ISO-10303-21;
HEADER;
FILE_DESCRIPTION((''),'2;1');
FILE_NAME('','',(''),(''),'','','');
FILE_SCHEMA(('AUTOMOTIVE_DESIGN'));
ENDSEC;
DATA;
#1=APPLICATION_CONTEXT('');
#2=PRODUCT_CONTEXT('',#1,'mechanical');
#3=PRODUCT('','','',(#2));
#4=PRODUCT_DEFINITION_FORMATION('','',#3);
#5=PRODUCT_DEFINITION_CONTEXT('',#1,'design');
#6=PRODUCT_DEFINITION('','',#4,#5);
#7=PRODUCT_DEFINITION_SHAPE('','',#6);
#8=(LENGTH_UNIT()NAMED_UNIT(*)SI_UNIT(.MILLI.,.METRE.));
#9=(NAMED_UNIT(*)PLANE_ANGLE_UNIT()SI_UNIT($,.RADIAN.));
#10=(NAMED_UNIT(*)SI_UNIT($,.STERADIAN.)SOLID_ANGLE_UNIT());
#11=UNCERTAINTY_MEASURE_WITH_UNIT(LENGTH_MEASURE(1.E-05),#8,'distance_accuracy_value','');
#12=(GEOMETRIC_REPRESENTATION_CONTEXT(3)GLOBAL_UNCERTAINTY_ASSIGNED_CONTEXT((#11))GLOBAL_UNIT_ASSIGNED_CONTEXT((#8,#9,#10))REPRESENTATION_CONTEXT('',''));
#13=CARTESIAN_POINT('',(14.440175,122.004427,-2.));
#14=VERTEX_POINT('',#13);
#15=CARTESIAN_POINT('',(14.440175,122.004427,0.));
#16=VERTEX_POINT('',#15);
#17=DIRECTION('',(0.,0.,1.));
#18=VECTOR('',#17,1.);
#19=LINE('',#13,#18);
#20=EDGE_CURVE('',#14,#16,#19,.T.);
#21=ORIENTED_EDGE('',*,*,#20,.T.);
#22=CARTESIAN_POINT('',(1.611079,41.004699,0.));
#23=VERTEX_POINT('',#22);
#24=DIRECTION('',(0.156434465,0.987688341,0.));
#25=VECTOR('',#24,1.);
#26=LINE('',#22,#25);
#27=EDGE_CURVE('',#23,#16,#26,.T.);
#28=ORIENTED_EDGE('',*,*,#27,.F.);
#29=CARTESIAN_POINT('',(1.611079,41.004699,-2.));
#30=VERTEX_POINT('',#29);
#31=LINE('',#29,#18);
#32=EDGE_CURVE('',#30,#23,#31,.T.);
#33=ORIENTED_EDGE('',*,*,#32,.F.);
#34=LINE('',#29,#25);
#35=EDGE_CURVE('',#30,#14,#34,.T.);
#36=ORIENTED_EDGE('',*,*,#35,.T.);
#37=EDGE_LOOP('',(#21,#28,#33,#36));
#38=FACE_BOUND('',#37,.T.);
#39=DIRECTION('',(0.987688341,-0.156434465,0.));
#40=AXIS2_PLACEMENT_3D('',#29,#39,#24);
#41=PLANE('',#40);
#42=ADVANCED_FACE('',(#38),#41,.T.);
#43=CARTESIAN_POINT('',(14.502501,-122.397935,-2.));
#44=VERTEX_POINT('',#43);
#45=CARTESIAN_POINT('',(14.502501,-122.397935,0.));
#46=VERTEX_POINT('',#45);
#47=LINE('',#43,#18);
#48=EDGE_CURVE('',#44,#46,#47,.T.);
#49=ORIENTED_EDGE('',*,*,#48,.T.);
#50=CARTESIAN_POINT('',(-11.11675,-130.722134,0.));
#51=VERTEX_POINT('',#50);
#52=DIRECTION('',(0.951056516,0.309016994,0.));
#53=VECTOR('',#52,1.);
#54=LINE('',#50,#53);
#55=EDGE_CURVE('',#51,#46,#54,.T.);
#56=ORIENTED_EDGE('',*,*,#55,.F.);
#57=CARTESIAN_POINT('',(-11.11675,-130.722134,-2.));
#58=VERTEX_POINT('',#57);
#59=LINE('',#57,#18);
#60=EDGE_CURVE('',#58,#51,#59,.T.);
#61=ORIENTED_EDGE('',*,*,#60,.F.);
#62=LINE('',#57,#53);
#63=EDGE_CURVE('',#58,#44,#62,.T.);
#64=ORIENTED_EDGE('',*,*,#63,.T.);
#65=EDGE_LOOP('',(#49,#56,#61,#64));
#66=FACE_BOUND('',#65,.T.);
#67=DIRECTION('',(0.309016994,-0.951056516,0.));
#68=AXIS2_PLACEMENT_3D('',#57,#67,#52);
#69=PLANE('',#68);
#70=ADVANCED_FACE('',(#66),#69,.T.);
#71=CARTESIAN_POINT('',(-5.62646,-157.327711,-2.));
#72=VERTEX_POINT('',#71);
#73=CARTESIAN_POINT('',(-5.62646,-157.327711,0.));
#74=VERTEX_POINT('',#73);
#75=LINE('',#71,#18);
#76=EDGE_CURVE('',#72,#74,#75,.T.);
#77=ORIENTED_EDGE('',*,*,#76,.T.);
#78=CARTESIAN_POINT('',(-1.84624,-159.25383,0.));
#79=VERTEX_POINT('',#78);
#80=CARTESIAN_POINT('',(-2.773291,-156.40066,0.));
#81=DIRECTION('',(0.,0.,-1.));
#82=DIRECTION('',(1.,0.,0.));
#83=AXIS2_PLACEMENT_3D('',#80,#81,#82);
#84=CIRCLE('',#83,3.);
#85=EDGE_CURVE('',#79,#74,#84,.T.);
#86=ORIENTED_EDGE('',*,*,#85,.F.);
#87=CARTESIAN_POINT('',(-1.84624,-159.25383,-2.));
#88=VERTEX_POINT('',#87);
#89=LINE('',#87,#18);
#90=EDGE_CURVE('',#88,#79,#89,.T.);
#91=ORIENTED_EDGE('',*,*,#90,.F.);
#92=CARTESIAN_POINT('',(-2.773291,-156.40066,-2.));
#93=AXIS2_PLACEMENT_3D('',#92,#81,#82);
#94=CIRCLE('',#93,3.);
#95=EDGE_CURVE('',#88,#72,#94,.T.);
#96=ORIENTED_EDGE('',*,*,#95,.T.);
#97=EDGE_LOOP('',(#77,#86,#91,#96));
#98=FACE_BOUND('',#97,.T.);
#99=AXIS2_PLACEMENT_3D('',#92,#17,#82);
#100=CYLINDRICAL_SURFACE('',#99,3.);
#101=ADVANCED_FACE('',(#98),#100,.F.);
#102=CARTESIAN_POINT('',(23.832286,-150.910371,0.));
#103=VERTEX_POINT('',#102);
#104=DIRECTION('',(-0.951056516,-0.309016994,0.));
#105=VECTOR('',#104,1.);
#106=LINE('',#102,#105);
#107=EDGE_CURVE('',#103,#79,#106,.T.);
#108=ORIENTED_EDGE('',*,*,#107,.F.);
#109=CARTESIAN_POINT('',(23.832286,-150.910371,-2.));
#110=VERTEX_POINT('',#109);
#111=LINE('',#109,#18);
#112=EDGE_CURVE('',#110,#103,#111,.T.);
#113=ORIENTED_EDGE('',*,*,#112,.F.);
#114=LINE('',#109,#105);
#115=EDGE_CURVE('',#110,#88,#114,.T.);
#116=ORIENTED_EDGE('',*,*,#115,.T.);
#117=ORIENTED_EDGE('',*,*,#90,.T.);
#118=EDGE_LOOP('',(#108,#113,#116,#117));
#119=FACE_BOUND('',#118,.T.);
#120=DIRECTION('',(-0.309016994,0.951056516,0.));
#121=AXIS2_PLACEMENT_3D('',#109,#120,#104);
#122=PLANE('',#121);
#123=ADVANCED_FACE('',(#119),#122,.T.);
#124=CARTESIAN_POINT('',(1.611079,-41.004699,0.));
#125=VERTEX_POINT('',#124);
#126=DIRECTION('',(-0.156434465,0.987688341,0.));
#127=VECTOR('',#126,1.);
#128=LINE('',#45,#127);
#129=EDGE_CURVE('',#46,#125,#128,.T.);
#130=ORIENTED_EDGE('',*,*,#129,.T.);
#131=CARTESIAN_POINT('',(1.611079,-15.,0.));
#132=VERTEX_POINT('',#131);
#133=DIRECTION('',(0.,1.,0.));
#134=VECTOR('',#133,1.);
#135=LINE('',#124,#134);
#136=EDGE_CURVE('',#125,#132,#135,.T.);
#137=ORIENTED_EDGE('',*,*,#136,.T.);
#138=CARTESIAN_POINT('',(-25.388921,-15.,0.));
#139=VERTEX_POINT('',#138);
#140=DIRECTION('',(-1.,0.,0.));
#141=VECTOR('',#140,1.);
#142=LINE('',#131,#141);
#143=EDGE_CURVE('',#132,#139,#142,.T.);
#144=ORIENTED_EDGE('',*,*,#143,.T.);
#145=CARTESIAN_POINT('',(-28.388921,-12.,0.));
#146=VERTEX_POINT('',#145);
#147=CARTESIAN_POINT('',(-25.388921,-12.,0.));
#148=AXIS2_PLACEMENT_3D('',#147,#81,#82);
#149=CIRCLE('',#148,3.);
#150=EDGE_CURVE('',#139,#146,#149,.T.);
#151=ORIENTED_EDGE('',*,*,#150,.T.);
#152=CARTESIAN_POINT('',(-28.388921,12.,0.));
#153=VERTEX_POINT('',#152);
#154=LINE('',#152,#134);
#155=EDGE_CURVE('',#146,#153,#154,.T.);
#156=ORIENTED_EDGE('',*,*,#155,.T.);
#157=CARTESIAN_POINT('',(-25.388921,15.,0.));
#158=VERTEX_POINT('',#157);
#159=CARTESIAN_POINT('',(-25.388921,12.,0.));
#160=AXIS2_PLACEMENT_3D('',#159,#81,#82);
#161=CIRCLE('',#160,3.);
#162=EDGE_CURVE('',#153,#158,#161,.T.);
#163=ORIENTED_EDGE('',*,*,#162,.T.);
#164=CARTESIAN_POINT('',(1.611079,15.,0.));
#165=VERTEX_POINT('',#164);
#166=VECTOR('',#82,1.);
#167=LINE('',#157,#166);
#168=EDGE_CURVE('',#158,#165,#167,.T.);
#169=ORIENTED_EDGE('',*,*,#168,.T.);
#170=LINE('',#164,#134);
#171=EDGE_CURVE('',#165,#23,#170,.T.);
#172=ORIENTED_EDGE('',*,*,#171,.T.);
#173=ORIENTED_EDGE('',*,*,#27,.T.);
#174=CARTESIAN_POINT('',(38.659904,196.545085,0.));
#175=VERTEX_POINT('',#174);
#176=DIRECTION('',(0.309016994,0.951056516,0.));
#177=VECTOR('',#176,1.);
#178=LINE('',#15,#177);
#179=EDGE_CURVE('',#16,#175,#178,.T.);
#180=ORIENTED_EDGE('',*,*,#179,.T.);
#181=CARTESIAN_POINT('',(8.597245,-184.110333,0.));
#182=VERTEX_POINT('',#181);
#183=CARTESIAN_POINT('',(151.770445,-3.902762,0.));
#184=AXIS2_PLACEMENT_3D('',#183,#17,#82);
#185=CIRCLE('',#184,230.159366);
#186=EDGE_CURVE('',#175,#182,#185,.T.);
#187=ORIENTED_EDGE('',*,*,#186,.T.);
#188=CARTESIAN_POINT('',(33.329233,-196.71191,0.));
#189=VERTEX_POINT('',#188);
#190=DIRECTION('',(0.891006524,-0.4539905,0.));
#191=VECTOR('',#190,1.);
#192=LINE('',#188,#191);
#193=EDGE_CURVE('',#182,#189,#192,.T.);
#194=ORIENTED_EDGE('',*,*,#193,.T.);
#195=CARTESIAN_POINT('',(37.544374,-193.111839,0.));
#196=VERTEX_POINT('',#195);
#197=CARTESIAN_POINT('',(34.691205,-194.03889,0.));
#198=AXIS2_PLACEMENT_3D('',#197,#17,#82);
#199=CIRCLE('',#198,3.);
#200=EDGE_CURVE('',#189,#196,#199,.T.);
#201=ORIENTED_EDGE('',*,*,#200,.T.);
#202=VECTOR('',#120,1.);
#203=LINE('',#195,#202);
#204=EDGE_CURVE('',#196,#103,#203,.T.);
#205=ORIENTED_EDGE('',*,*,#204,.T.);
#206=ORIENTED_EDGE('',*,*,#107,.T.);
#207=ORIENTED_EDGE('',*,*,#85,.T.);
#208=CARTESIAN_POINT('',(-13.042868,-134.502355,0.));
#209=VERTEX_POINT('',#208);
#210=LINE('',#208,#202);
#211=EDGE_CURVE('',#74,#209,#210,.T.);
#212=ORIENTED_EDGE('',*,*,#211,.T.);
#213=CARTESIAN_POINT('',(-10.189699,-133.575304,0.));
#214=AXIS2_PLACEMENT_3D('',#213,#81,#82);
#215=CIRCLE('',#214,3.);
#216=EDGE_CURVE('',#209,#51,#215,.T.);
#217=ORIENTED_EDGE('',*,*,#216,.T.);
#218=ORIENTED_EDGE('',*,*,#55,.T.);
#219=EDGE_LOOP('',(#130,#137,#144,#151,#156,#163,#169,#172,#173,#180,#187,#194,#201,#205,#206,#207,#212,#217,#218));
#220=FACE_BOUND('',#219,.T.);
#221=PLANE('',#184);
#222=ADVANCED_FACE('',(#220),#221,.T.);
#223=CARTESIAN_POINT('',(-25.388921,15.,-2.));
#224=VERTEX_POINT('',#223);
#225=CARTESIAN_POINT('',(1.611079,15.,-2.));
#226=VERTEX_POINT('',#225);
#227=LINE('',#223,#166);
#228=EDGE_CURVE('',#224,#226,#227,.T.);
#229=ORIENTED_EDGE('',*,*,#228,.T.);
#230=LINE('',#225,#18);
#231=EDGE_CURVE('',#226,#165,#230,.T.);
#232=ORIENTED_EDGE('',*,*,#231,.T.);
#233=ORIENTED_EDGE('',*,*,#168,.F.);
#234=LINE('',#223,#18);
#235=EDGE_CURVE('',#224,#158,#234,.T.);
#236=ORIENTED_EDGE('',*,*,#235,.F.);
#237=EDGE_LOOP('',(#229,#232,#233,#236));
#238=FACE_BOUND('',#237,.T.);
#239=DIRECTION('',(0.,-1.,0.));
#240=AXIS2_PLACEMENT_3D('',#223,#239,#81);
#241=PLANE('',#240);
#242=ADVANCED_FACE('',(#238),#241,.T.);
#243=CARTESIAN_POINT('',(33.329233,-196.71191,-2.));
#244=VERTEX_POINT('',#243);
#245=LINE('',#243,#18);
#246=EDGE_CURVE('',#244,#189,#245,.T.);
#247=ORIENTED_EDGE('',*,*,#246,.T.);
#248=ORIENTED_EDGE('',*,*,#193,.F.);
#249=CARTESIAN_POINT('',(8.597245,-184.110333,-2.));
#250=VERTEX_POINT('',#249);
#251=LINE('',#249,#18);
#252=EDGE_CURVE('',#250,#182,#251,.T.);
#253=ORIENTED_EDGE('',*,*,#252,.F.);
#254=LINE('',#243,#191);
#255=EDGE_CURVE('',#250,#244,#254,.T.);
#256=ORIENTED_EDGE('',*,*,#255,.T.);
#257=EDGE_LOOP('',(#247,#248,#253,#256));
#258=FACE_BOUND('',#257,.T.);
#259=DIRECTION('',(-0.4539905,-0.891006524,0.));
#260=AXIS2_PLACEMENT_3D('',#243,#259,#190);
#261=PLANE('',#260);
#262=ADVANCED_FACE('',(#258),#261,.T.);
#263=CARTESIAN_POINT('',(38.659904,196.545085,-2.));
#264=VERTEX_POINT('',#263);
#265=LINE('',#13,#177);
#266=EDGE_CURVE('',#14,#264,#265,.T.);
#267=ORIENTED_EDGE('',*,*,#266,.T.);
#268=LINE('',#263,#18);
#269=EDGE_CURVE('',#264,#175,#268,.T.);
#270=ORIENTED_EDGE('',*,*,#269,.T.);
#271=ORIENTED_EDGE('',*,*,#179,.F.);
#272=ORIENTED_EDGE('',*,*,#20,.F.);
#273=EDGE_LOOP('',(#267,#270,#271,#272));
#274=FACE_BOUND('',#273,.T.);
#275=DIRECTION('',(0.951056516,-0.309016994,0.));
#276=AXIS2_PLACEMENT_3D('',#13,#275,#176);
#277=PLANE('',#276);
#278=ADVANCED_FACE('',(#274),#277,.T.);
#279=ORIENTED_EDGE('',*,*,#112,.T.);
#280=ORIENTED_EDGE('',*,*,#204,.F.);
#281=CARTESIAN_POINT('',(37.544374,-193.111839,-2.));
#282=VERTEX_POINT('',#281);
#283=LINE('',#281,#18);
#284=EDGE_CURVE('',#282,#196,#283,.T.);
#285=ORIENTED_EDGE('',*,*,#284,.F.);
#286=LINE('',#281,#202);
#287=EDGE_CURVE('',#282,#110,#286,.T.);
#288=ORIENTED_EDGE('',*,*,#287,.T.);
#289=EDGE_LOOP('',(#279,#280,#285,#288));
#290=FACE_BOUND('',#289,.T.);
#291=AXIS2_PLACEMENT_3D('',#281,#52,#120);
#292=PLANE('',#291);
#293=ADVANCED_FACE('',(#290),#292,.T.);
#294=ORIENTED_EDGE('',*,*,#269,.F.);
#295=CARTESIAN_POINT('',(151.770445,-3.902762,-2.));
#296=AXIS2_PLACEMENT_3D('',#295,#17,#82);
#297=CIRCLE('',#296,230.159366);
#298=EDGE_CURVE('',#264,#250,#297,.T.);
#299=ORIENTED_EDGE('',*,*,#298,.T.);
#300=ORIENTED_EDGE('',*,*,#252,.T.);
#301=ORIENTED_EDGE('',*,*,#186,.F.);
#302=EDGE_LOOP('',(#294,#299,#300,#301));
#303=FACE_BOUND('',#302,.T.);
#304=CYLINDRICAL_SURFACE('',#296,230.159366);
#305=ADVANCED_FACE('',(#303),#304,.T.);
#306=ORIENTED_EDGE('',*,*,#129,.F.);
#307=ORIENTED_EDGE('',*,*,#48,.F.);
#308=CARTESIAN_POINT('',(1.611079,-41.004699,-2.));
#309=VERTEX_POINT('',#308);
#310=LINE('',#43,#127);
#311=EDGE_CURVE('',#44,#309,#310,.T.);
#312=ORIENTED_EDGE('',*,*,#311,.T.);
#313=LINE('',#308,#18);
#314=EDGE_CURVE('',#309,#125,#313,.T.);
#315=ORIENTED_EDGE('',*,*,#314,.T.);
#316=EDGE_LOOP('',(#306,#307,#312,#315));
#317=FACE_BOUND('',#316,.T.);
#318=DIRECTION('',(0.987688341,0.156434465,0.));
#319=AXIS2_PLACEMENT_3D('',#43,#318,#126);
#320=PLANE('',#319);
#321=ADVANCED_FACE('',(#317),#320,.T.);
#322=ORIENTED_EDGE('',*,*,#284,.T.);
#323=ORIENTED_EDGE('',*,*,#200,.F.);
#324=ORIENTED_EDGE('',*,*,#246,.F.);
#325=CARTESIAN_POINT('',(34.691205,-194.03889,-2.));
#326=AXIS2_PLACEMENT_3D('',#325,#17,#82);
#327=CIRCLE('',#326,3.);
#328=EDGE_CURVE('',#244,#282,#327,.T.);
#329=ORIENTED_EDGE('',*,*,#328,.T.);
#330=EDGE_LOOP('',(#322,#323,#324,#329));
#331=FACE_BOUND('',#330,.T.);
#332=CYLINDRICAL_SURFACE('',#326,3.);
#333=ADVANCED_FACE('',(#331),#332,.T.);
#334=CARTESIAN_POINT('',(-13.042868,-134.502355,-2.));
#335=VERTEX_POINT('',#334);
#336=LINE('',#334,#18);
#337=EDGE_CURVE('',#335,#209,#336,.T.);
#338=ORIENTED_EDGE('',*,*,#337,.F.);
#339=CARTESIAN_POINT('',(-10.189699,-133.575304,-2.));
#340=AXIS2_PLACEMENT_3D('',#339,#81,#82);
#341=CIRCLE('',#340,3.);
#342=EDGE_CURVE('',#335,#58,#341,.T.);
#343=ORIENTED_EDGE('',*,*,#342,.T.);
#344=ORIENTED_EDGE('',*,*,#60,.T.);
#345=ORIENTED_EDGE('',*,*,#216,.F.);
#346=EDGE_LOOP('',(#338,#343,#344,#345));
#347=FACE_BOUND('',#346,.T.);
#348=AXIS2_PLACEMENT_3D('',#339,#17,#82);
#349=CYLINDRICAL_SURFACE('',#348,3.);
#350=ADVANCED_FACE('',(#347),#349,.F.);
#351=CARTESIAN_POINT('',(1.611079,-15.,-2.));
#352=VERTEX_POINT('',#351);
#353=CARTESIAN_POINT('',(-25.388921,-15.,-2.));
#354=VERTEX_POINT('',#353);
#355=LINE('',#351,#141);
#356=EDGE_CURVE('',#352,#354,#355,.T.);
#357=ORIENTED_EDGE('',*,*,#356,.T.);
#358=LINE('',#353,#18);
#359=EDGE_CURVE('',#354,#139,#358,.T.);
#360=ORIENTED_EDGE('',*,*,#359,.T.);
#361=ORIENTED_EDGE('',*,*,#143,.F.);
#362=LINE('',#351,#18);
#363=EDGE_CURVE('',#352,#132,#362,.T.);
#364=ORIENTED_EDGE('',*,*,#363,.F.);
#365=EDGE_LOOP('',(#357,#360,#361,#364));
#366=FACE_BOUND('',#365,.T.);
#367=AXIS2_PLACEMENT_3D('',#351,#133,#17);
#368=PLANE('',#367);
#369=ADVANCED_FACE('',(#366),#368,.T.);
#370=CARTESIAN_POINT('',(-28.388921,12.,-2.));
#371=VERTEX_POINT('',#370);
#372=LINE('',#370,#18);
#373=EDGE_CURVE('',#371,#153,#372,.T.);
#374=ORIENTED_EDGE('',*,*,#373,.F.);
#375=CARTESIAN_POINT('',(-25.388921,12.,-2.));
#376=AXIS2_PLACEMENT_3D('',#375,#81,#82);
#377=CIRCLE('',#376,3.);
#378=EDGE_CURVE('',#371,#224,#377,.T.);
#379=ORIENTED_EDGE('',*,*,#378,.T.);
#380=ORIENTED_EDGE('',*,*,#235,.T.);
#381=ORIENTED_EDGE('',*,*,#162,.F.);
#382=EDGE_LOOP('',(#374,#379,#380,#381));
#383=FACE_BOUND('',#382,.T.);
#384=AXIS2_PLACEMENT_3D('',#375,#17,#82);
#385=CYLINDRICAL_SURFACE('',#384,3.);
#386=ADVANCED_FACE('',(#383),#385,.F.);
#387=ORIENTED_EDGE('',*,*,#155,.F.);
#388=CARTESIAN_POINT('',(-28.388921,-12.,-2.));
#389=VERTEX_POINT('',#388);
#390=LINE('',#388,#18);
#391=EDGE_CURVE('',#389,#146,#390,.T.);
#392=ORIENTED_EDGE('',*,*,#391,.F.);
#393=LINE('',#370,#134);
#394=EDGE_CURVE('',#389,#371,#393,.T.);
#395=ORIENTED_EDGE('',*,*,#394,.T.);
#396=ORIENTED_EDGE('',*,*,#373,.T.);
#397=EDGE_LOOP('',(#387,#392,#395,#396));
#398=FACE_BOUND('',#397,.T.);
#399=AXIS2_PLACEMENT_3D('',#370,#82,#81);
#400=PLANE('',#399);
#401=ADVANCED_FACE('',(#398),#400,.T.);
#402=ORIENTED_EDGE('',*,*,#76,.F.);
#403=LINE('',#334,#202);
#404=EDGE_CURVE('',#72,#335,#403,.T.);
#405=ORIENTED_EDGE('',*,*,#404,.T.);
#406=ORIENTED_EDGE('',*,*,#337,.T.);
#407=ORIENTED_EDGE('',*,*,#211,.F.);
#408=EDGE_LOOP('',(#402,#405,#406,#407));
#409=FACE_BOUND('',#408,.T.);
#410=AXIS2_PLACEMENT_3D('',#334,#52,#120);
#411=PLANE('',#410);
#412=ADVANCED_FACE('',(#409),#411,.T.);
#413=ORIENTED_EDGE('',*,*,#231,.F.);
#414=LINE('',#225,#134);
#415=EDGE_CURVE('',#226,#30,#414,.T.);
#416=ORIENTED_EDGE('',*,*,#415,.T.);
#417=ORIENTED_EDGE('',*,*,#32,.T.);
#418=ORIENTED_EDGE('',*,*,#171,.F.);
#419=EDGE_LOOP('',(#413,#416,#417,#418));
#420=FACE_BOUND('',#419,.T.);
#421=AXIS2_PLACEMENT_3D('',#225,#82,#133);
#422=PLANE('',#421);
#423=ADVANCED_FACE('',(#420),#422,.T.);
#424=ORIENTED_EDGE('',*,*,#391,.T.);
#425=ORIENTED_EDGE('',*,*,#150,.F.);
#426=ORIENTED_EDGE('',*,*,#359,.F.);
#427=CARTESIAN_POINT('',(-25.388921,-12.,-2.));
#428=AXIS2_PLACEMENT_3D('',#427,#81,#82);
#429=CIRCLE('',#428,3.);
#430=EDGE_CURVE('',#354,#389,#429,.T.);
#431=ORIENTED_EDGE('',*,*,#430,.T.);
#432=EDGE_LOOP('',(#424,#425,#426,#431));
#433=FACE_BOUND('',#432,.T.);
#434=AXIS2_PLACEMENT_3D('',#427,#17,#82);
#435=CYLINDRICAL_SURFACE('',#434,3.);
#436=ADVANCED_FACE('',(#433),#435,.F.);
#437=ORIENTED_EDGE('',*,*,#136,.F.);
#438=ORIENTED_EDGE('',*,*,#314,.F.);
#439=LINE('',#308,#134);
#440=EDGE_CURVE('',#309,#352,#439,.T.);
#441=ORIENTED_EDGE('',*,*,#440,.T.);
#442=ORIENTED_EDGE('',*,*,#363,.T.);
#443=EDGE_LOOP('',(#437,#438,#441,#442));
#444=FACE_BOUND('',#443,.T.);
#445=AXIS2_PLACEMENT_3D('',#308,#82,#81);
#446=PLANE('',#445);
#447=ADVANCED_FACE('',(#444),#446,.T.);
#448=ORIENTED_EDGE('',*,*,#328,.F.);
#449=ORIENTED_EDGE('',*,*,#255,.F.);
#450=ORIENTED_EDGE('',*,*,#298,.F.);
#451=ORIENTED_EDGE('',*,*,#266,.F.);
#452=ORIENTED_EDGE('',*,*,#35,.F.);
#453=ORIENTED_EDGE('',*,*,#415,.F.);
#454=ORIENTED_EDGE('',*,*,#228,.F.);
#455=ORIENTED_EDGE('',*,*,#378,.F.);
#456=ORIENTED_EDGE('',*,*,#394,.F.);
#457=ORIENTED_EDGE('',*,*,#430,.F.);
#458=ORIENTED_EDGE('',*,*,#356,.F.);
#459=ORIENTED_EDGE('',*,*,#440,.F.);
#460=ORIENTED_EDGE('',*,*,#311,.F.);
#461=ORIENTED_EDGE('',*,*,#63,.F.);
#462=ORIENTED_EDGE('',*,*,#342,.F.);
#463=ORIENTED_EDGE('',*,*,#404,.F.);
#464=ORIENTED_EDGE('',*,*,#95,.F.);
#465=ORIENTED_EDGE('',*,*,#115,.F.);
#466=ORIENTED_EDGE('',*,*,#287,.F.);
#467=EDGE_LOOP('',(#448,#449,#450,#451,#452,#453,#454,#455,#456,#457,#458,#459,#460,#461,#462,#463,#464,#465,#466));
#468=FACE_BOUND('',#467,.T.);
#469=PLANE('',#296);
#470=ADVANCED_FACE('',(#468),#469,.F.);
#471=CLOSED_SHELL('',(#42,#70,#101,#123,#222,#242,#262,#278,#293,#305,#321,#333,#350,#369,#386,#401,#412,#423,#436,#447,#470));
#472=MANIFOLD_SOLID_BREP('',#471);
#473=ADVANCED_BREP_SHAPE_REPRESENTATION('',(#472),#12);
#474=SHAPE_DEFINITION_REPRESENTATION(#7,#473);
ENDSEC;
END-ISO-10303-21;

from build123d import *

# Parameters (mm, degrees)
SM_BASE_FLANGE_1_DEPTH = 2


# Sheet-metal steps are written as plain solids
with BuildPart() as part:
    # Sketch 1 → Базовая кромка1 (new body)
    with BuildSketch(Plane.XY):
        with BuildLine():
            Line((-28.388920969, 12), (-28.388920969, -12))
            ThreePointArc((-28.388920969, -12), (-27.510241313, -14.121320344), (-25.388920969, -15))
            Line((-25.388920969, -15), (1.611079031, -15))
            Line((1.611079031, -15), (1.611079031, -41.004699494))
            Line((1.611079031, -41.004699494), (14.502501119, -122.397935229))
            Line((14.502501119, -122.397935229), (-11.116749626, -130.722134398))
            ThreePointArc((-11.116749626, -130.722134398), (-12.862718215, -132.213332448), (-13.042868191, -134.50235493))
            Line((-13.042868191, -134.50235493), (-5.626460326, -157.327711321))
            ThreePointArc((-5.626460326, -157.327711321), (-4.135262277, -159.073679911), (-1.846239794, -159.253829887))
            Line((-1.846239794, -159.253829887), (23.832286146, -150.910371039))
            Line((23.832286146, -150.910371039), (37.544374419, -193.111839379))
            ThreePointArc((37.544374419, -193.111839379), (36.639549016, -196.320108259), (33.329233371, -196.711909935))
            Line((33.329233371, -196.711909935), (8.597245129, -184.110332509))
            ThreePointArc((8.597245129, -184.110332509), (-77.67448455, 14.217890909), (38.659903534, 196.545084972))
            Line((38.659903534, 196.545084972), (14.44017549, 122.004426694))
            Line((14.44017549, 122.004426694), (1.611079031, 41.004699494))
            Line((1.611079031, 41.004699494), (1.611079031, 15))
            Line((1.611079031, 15), (-25.388920969, 15))
            ThreePointArc((-25.388920969, 15), (-27.510241313, 14.121320344), (-28.388920969, 12))
        make_face()
    extrude(amount=-SM_BASE_FLANGE_1_DEPTH)


solid = part.part
